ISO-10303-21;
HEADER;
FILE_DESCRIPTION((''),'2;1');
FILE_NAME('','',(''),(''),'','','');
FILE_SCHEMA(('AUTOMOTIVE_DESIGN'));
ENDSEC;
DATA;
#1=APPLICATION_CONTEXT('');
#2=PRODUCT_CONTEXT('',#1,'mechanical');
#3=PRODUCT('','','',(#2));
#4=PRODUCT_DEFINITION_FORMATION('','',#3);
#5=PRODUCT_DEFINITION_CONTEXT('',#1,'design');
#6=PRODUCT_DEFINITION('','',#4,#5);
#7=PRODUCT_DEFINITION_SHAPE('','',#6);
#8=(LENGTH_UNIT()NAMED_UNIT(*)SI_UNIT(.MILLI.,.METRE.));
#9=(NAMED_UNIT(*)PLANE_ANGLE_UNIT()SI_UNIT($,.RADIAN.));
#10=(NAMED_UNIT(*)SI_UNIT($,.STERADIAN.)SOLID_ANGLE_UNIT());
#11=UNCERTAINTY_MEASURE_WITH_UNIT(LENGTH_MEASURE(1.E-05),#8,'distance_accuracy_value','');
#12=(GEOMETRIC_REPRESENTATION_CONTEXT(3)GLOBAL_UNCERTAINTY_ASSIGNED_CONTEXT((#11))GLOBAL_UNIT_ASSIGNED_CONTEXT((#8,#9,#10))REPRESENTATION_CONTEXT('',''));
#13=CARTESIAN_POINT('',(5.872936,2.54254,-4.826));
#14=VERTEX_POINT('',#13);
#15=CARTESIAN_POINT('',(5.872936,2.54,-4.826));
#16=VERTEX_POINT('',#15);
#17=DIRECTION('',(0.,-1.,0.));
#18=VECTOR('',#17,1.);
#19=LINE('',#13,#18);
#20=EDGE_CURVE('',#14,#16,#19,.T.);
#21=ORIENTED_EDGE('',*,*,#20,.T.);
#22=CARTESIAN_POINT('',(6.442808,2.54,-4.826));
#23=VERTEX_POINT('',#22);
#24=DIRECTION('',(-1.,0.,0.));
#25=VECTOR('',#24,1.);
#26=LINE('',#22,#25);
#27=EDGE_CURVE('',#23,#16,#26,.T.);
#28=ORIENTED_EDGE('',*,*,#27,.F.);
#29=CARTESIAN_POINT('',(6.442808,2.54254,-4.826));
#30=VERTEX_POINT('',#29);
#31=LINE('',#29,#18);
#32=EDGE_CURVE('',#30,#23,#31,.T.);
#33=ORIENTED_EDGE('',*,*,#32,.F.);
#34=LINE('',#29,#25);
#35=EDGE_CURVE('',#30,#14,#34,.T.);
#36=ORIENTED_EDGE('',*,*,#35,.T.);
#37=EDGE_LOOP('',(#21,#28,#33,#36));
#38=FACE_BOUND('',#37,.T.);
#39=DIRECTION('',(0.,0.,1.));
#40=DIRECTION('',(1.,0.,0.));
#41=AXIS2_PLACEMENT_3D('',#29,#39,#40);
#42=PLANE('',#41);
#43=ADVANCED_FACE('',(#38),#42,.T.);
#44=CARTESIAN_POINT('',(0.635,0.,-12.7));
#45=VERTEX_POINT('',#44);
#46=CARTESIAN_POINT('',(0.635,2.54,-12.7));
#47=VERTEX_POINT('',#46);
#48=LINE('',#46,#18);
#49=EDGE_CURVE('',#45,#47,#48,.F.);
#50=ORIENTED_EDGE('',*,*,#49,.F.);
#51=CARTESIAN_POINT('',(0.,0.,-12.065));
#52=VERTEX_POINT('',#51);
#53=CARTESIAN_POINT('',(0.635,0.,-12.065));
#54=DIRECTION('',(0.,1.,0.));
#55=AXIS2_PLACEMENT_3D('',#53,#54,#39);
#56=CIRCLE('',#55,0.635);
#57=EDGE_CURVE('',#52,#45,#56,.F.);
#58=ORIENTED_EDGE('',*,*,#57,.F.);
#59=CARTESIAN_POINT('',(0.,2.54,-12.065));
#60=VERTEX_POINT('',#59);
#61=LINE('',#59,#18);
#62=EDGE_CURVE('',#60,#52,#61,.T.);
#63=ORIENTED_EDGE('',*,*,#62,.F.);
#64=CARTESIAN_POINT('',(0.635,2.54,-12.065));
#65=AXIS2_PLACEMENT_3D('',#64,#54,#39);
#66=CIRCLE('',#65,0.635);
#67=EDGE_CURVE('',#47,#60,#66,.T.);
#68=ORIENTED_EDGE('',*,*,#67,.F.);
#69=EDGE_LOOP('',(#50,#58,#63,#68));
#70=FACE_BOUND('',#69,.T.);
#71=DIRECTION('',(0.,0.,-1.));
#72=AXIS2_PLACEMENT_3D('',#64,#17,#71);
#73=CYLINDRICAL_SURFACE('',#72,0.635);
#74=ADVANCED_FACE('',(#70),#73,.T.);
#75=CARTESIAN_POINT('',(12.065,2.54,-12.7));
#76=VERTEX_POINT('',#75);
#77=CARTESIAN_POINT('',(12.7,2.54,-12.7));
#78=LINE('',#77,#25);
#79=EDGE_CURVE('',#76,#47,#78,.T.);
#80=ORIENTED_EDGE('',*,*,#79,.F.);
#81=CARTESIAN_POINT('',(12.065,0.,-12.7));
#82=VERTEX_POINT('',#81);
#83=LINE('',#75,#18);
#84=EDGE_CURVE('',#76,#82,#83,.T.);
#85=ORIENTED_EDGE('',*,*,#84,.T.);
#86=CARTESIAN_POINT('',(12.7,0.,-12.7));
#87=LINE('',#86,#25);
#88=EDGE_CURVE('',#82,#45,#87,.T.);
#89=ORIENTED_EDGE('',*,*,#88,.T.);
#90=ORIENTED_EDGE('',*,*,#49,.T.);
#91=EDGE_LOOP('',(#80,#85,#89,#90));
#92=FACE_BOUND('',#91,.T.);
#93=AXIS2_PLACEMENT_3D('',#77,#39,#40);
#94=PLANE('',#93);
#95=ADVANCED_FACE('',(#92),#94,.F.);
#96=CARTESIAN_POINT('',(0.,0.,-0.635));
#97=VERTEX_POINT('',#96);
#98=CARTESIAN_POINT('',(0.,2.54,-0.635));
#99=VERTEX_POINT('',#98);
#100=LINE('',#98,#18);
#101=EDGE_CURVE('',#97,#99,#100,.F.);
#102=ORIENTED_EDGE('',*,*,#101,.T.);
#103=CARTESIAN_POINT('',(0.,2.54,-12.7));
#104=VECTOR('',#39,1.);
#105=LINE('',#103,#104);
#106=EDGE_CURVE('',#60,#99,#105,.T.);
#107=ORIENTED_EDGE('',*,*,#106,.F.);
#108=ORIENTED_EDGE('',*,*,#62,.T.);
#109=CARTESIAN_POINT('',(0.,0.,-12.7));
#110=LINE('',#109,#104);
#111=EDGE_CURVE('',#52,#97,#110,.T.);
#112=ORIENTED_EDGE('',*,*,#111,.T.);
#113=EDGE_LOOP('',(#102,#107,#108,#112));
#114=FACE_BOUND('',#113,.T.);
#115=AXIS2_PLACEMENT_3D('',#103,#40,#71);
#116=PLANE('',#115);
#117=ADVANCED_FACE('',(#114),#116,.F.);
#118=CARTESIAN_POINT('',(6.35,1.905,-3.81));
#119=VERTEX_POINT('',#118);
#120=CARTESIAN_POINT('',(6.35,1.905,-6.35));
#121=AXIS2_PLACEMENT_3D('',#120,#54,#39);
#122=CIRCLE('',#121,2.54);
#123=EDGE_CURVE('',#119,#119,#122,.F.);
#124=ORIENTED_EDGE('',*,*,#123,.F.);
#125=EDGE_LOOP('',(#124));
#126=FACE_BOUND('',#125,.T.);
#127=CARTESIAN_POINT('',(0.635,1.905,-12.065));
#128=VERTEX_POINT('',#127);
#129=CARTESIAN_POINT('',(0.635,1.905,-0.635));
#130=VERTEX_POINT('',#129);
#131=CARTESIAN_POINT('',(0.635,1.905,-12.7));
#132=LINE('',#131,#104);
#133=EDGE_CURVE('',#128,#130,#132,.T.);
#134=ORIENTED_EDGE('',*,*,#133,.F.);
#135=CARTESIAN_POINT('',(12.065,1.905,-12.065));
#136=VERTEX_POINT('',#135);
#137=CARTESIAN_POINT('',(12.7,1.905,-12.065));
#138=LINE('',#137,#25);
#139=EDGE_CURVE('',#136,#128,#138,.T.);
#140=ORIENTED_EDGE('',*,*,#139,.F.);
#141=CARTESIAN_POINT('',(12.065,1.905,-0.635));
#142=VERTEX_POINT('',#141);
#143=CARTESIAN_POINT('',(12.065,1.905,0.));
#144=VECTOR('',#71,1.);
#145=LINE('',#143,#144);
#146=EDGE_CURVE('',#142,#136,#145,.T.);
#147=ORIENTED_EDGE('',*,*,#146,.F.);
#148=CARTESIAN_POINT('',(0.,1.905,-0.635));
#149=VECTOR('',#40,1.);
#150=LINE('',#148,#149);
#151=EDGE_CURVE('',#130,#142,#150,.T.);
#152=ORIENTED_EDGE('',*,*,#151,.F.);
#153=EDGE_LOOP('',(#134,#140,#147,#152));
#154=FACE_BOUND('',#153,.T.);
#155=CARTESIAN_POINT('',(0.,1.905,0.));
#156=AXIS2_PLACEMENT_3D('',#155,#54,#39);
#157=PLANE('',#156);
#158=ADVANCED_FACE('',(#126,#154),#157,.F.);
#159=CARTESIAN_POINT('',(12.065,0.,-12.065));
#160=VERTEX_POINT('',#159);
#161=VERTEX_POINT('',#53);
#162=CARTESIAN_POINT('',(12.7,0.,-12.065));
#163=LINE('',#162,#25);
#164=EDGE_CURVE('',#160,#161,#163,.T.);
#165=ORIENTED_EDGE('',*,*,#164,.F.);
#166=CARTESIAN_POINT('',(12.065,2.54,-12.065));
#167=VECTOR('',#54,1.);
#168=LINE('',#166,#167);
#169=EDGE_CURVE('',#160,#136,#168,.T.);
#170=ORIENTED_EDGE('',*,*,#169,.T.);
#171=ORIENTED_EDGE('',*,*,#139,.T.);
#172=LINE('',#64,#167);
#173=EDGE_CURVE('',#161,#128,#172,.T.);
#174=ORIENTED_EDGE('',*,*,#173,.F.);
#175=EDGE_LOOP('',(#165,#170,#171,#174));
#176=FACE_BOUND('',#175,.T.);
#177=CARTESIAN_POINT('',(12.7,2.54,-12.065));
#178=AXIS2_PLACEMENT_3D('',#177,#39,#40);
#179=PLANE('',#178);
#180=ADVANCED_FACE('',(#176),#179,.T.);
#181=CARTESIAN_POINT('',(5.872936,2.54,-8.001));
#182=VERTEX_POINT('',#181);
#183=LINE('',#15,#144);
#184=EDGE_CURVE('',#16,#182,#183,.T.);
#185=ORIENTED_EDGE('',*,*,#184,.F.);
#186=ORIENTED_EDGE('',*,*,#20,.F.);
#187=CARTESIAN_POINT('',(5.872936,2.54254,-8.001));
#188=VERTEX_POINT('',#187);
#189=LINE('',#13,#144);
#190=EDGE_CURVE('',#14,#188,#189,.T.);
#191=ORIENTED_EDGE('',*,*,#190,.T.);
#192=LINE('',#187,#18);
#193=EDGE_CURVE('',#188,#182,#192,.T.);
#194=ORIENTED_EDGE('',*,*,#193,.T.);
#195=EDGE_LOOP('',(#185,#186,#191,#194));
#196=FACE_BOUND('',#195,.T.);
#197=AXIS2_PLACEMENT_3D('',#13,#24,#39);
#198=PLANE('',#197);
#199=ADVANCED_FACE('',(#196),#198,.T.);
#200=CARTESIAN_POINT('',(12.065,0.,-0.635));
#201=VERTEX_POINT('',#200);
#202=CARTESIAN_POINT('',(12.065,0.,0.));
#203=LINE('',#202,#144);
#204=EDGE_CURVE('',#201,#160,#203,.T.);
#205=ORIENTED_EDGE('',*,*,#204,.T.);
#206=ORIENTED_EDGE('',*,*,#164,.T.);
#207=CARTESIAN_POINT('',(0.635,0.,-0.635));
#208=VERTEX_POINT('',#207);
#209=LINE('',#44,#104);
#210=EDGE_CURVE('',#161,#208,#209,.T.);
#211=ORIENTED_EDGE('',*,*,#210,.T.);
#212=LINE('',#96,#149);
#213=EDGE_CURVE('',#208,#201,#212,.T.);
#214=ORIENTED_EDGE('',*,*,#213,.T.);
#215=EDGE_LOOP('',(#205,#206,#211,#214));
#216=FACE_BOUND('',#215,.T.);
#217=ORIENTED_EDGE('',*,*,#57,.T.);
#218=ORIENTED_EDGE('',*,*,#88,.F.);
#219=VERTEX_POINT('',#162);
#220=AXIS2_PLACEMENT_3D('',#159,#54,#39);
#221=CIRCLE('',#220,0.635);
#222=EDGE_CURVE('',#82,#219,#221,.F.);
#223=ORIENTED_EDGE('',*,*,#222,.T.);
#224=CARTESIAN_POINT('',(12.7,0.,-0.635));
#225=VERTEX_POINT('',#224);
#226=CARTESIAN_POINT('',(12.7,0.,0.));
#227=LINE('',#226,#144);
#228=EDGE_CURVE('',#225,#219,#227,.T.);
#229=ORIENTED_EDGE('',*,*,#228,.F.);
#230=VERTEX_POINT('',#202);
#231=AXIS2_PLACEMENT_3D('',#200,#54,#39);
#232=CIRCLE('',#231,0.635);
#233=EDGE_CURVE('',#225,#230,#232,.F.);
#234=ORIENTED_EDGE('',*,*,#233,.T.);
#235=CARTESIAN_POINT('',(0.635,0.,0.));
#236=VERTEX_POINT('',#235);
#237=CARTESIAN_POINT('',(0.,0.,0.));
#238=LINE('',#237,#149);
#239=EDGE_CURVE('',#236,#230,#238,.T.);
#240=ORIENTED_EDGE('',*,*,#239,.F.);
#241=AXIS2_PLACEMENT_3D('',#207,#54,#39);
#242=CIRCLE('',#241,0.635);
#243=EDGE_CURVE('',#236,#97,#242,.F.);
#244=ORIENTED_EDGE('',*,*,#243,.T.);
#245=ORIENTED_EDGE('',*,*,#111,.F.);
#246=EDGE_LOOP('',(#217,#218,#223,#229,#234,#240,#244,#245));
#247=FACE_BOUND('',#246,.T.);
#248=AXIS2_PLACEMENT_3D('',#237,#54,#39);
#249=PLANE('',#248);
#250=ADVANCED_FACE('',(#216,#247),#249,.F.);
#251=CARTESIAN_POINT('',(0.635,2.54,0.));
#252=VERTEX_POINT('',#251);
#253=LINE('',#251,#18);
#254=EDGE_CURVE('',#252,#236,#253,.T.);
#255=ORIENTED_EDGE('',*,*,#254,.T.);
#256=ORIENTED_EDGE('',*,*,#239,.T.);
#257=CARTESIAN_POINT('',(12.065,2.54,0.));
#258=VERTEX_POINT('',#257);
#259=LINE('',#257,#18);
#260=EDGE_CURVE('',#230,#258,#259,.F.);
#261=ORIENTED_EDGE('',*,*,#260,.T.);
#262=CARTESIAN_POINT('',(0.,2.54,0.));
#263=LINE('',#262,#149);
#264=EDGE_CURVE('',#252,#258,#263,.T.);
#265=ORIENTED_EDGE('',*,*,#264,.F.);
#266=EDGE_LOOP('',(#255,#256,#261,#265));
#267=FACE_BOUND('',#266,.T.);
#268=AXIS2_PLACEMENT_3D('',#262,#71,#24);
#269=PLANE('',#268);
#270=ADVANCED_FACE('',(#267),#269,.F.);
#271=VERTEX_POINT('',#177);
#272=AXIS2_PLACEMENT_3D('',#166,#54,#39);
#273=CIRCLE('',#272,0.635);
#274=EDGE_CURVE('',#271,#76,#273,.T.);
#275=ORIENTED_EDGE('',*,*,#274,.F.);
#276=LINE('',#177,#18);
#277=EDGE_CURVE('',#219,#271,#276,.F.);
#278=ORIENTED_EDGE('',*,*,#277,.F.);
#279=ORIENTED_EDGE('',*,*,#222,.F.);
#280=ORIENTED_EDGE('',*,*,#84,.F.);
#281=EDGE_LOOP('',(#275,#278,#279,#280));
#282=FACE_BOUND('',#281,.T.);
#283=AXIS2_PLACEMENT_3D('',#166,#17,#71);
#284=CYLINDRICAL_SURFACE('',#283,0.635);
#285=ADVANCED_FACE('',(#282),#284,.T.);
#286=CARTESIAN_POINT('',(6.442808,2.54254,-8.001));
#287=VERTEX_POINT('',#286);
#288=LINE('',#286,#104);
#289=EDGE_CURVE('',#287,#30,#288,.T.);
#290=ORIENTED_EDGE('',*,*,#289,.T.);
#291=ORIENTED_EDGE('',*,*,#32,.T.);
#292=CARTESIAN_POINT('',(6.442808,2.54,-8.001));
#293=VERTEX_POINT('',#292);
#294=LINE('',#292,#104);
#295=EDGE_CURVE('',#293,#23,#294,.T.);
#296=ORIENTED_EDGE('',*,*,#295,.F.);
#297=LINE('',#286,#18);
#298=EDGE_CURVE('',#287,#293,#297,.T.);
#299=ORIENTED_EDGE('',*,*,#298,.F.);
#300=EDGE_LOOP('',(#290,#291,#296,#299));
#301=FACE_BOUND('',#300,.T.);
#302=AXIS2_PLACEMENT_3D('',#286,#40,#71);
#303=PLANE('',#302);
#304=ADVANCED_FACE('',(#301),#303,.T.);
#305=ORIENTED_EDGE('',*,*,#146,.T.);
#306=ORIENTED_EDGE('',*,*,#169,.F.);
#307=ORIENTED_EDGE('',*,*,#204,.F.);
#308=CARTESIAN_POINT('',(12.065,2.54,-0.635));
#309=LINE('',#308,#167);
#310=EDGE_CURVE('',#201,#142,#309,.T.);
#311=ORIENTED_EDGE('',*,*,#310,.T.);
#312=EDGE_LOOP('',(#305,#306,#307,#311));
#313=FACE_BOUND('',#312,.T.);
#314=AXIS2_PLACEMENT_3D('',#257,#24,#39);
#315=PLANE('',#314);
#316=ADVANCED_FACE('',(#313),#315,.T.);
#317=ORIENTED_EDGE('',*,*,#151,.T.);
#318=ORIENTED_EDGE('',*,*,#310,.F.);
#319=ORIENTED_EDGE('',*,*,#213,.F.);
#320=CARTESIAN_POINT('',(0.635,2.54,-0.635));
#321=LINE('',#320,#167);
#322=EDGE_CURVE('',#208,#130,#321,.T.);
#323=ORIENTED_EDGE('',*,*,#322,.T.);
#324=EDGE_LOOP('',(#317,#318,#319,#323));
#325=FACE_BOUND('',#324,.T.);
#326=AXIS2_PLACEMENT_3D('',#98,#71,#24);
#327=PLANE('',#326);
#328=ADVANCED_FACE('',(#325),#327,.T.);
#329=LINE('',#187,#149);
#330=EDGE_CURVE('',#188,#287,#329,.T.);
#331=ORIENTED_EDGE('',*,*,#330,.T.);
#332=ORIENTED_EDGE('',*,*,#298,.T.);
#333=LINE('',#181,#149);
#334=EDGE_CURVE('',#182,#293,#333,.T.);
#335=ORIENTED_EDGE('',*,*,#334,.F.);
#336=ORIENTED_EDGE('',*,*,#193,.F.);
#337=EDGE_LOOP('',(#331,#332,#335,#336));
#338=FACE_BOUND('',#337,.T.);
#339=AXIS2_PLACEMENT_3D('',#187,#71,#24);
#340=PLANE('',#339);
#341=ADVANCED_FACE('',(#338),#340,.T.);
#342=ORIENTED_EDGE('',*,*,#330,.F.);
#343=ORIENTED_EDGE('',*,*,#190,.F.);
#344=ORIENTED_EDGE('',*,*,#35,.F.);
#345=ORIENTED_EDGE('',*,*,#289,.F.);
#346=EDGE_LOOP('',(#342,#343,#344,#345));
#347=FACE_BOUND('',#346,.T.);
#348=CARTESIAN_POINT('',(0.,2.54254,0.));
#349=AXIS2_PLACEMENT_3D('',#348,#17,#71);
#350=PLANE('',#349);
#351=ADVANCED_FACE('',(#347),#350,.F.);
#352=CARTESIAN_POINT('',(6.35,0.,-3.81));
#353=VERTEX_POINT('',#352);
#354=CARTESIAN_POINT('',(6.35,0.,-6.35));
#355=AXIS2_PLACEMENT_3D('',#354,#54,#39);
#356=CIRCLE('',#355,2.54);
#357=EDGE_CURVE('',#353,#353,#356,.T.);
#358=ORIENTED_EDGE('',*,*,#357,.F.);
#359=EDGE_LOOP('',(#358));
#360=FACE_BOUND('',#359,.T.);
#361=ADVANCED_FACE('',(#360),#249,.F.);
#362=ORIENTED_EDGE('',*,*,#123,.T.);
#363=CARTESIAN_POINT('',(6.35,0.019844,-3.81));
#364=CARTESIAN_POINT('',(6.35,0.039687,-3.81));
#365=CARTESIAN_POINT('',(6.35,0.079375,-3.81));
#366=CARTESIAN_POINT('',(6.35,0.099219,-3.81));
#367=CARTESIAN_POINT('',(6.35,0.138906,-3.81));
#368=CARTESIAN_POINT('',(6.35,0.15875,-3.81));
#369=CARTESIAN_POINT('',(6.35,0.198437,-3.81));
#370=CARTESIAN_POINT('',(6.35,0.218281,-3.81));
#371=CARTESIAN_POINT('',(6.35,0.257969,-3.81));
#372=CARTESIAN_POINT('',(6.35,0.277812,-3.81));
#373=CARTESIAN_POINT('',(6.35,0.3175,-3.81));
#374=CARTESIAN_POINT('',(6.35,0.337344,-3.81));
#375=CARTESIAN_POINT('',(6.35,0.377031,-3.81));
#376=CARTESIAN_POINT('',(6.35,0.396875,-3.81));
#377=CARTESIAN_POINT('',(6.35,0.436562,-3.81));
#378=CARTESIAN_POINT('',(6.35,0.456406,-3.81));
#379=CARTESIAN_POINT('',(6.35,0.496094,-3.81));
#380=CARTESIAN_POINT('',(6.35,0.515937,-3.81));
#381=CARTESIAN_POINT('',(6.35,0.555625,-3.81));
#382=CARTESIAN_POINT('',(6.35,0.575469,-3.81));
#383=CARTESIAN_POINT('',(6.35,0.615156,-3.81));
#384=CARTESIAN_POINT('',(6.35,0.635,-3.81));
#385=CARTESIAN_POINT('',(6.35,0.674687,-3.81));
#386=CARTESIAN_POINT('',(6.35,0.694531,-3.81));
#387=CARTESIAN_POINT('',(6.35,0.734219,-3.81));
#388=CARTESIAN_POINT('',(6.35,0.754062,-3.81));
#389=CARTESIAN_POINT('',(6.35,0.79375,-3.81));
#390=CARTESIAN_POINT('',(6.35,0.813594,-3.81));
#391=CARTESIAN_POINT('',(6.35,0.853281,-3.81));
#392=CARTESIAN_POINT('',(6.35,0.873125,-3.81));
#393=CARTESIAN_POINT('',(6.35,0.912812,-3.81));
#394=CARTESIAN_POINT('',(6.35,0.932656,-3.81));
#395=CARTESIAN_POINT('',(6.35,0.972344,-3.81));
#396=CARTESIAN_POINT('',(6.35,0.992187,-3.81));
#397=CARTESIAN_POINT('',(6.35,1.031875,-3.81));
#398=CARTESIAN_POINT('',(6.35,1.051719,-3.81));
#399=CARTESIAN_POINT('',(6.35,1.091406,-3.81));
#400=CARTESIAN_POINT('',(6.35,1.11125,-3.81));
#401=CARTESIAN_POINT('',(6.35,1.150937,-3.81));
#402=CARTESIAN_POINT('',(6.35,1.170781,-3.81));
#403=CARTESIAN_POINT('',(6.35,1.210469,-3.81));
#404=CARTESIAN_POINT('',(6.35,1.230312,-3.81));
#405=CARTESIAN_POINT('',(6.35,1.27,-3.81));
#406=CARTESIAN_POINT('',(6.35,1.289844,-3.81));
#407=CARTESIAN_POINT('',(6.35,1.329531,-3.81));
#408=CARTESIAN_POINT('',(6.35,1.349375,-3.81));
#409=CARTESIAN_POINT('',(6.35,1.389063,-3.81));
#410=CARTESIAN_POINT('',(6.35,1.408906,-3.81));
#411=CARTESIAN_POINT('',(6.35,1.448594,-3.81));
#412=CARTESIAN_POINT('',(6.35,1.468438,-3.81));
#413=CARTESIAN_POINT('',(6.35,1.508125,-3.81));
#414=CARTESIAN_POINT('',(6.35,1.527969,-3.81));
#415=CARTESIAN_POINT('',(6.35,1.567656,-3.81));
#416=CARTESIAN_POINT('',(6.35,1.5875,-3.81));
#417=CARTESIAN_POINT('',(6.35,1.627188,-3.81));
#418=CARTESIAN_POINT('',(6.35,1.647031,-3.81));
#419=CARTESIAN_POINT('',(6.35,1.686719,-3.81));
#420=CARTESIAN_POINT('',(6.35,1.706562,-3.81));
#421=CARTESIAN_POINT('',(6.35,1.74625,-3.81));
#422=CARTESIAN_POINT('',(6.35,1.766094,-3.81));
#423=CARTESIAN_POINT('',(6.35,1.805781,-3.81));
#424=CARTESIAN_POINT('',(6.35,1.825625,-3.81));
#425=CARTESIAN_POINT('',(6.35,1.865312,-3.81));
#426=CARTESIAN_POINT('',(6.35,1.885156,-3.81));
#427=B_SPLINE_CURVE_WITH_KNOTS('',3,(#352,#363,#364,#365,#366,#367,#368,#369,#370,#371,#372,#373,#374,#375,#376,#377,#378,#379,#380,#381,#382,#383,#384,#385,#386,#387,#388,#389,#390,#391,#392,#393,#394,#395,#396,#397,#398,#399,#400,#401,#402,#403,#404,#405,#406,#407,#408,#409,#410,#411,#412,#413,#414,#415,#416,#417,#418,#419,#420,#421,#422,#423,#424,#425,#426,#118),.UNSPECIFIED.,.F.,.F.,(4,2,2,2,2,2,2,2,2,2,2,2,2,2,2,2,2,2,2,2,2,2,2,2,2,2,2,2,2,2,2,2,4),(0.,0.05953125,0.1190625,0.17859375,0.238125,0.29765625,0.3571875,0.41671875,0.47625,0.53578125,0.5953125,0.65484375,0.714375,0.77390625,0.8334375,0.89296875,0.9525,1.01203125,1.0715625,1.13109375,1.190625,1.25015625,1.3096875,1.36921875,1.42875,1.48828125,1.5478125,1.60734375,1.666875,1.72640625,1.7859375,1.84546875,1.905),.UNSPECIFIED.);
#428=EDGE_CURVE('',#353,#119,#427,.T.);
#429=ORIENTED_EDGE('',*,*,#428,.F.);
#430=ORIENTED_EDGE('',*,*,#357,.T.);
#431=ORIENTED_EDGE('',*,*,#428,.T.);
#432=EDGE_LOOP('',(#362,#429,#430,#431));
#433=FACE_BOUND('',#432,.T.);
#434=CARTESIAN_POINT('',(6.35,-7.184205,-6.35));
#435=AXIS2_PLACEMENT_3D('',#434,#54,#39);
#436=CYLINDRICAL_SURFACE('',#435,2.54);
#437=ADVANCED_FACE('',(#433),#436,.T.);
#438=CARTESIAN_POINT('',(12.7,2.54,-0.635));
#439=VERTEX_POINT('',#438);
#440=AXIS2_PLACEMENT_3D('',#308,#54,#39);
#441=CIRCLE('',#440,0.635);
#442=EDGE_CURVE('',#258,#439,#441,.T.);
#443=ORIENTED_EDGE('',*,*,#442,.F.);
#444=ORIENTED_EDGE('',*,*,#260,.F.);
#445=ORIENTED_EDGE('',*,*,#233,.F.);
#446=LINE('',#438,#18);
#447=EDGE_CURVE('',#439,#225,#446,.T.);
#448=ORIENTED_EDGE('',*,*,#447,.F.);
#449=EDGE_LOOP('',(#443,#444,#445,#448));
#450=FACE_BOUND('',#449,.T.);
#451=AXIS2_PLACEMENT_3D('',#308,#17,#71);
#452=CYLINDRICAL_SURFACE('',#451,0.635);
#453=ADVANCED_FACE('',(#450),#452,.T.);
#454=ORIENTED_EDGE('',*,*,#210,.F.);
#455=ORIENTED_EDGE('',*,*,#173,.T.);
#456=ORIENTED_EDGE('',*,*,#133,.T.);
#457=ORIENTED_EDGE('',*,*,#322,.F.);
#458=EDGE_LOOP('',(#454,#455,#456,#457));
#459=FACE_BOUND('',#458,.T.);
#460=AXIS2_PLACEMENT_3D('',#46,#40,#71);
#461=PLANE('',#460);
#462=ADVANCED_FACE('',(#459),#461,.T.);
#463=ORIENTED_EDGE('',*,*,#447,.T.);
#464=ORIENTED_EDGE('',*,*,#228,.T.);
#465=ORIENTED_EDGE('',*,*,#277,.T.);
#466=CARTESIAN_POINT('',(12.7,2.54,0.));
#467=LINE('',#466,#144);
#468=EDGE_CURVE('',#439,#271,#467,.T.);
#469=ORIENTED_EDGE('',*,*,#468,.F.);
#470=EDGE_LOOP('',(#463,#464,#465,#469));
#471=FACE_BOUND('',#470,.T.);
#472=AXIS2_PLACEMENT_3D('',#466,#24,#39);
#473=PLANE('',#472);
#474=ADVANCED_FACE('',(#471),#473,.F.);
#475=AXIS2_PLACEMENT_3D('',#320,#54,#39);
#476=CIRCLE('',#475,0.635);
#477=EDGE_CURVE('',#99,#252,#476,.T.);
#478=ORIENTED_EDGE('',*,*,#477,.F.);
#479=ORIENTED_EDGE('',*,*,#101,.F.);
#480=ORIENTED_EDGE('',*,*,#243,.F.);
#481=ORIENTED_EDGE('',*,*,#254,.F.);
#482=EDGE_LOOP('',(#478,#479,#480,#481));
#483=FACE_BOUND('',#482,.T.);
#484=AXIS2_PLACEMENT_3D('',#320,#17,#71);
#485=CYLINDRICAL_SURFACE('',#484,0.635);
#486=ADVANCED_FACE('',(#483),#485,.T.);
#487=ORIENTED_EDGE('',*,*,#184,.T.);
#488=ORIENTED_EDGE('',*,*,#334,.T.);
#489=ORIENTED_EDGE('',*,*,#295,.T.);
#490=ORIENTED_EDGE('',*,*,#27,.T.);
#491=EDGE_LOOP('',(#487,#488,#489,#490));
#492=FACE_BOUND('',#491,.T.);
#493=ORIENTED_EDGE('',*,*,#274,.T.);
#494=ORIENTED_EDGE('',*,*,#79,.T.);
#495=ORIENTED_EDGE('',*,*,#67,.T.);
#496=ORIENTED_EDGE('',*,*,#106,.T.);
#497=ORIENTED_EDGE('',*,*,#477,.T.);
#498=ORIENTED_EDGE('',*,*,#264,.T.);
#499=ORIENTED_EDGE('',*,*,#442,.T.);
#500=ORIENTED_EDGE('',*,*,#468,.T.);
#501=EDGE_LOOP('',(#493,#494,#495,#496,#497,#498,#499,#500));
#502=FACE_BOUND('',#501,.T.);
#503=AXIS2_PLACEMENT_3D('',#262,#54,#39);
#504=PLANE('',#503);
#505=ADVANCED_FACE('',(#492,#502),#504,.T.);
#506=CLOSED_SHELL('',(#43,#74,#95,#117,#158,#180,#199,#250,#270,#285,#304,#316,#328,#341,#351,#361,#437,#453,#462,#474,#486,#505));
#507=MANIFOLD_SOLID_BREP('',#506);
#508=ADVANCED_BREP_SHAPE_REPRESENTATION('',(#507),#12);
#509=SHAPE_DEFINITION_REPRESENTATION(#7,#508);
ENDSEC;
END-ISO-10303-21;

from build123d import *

# Parameters (mm, degrees)
SKETCH1_W           = 12.7
SKETCH1_H           = 12.7
BOSS_EXTRUDE1_DEPTH = 2.54
FILLET1_R           = 0.635
SHELL1_START        = 0.635
SHELL1_OUTLINE_W    = 1.905
SHELL1_OUTLINE_H    = 11.43
SHELL1_DEPTH        = 11.43
SKETCH2_R           = 2.54
BOSS_EXTRUDE2_DEPTH = 1.905
SKETCH3_W           = 0.569871795
SKETCH3_H           = 3.175
BOSS_EXTRUDE3_DEPTH = 0.00254


# Read off the part's stored shape, not the designer's step: Shell1
with BuildPart() as part:
    # Sketch1 → Boss-Extrude1 (new body)
    with BuildSketch(Plane(origin=(0, 0, 0), x_dir=(1, 0, 0), z_dir=(0, 1, 0))):
        with Locations((6.35, 6.35)):
            Rectangle(SKETCH1_W, SKETCH1_H)
    extrude(amount=BOSS_EXTRUDE1_DEPTH)

    # Fillet1
    fillet1_edges = [part.edges().sort_by_distance(p)[0] for p in [
        (0, 1.27, -12.7),
        (12.7, 1.27, -12.7),
        (12.7, 1.27, 0),
        (0, 1.27, 0),
    ]]
    fillet(fillet1_edges, radius=FILLET1_R)

    # Shell1 outline → Shell1 (cut)
    with BuildSketch(Plane.YZ.offset(SHELL1_START)):
        with Locations((0.9525, -6.35)):
            Rectangle(SHELL1_OUTLINE_W, SHELL1_OUTLINE_H)
    extrude(amount=SHELL1_DEPTH, mode=Mode.SUBTRACT)

    # Sketch2 → Boss-Extrude2 (add)
    with BuildSketch(Plane(origin=(0, 1.905, 0), x_dir=(-1, 0, 0), z_dir=(0, -1, 0))):
        with Locations(Location((-6.35, 6.35, 0), (0, 0, 270))):
            Circle(SKETCH2_R)
    extrude(amount=BOSS_EXTRUDE2_DEPTH)

    # Sketch3 → Boss-Extrude3 (add)
    with BuildSketch(Plane(origin=(0, 2.54, 0), x_dir=(1, 0, 0), z_dir=(0, 1, 0))):
        with Locations((6.157871795, 6.4135)):
            Rectangle(SKETCH3_W, SKETCH3_H)
    extrude(amount=BOSS_EXTRUDE3_DEPTH)


solid = part.part
